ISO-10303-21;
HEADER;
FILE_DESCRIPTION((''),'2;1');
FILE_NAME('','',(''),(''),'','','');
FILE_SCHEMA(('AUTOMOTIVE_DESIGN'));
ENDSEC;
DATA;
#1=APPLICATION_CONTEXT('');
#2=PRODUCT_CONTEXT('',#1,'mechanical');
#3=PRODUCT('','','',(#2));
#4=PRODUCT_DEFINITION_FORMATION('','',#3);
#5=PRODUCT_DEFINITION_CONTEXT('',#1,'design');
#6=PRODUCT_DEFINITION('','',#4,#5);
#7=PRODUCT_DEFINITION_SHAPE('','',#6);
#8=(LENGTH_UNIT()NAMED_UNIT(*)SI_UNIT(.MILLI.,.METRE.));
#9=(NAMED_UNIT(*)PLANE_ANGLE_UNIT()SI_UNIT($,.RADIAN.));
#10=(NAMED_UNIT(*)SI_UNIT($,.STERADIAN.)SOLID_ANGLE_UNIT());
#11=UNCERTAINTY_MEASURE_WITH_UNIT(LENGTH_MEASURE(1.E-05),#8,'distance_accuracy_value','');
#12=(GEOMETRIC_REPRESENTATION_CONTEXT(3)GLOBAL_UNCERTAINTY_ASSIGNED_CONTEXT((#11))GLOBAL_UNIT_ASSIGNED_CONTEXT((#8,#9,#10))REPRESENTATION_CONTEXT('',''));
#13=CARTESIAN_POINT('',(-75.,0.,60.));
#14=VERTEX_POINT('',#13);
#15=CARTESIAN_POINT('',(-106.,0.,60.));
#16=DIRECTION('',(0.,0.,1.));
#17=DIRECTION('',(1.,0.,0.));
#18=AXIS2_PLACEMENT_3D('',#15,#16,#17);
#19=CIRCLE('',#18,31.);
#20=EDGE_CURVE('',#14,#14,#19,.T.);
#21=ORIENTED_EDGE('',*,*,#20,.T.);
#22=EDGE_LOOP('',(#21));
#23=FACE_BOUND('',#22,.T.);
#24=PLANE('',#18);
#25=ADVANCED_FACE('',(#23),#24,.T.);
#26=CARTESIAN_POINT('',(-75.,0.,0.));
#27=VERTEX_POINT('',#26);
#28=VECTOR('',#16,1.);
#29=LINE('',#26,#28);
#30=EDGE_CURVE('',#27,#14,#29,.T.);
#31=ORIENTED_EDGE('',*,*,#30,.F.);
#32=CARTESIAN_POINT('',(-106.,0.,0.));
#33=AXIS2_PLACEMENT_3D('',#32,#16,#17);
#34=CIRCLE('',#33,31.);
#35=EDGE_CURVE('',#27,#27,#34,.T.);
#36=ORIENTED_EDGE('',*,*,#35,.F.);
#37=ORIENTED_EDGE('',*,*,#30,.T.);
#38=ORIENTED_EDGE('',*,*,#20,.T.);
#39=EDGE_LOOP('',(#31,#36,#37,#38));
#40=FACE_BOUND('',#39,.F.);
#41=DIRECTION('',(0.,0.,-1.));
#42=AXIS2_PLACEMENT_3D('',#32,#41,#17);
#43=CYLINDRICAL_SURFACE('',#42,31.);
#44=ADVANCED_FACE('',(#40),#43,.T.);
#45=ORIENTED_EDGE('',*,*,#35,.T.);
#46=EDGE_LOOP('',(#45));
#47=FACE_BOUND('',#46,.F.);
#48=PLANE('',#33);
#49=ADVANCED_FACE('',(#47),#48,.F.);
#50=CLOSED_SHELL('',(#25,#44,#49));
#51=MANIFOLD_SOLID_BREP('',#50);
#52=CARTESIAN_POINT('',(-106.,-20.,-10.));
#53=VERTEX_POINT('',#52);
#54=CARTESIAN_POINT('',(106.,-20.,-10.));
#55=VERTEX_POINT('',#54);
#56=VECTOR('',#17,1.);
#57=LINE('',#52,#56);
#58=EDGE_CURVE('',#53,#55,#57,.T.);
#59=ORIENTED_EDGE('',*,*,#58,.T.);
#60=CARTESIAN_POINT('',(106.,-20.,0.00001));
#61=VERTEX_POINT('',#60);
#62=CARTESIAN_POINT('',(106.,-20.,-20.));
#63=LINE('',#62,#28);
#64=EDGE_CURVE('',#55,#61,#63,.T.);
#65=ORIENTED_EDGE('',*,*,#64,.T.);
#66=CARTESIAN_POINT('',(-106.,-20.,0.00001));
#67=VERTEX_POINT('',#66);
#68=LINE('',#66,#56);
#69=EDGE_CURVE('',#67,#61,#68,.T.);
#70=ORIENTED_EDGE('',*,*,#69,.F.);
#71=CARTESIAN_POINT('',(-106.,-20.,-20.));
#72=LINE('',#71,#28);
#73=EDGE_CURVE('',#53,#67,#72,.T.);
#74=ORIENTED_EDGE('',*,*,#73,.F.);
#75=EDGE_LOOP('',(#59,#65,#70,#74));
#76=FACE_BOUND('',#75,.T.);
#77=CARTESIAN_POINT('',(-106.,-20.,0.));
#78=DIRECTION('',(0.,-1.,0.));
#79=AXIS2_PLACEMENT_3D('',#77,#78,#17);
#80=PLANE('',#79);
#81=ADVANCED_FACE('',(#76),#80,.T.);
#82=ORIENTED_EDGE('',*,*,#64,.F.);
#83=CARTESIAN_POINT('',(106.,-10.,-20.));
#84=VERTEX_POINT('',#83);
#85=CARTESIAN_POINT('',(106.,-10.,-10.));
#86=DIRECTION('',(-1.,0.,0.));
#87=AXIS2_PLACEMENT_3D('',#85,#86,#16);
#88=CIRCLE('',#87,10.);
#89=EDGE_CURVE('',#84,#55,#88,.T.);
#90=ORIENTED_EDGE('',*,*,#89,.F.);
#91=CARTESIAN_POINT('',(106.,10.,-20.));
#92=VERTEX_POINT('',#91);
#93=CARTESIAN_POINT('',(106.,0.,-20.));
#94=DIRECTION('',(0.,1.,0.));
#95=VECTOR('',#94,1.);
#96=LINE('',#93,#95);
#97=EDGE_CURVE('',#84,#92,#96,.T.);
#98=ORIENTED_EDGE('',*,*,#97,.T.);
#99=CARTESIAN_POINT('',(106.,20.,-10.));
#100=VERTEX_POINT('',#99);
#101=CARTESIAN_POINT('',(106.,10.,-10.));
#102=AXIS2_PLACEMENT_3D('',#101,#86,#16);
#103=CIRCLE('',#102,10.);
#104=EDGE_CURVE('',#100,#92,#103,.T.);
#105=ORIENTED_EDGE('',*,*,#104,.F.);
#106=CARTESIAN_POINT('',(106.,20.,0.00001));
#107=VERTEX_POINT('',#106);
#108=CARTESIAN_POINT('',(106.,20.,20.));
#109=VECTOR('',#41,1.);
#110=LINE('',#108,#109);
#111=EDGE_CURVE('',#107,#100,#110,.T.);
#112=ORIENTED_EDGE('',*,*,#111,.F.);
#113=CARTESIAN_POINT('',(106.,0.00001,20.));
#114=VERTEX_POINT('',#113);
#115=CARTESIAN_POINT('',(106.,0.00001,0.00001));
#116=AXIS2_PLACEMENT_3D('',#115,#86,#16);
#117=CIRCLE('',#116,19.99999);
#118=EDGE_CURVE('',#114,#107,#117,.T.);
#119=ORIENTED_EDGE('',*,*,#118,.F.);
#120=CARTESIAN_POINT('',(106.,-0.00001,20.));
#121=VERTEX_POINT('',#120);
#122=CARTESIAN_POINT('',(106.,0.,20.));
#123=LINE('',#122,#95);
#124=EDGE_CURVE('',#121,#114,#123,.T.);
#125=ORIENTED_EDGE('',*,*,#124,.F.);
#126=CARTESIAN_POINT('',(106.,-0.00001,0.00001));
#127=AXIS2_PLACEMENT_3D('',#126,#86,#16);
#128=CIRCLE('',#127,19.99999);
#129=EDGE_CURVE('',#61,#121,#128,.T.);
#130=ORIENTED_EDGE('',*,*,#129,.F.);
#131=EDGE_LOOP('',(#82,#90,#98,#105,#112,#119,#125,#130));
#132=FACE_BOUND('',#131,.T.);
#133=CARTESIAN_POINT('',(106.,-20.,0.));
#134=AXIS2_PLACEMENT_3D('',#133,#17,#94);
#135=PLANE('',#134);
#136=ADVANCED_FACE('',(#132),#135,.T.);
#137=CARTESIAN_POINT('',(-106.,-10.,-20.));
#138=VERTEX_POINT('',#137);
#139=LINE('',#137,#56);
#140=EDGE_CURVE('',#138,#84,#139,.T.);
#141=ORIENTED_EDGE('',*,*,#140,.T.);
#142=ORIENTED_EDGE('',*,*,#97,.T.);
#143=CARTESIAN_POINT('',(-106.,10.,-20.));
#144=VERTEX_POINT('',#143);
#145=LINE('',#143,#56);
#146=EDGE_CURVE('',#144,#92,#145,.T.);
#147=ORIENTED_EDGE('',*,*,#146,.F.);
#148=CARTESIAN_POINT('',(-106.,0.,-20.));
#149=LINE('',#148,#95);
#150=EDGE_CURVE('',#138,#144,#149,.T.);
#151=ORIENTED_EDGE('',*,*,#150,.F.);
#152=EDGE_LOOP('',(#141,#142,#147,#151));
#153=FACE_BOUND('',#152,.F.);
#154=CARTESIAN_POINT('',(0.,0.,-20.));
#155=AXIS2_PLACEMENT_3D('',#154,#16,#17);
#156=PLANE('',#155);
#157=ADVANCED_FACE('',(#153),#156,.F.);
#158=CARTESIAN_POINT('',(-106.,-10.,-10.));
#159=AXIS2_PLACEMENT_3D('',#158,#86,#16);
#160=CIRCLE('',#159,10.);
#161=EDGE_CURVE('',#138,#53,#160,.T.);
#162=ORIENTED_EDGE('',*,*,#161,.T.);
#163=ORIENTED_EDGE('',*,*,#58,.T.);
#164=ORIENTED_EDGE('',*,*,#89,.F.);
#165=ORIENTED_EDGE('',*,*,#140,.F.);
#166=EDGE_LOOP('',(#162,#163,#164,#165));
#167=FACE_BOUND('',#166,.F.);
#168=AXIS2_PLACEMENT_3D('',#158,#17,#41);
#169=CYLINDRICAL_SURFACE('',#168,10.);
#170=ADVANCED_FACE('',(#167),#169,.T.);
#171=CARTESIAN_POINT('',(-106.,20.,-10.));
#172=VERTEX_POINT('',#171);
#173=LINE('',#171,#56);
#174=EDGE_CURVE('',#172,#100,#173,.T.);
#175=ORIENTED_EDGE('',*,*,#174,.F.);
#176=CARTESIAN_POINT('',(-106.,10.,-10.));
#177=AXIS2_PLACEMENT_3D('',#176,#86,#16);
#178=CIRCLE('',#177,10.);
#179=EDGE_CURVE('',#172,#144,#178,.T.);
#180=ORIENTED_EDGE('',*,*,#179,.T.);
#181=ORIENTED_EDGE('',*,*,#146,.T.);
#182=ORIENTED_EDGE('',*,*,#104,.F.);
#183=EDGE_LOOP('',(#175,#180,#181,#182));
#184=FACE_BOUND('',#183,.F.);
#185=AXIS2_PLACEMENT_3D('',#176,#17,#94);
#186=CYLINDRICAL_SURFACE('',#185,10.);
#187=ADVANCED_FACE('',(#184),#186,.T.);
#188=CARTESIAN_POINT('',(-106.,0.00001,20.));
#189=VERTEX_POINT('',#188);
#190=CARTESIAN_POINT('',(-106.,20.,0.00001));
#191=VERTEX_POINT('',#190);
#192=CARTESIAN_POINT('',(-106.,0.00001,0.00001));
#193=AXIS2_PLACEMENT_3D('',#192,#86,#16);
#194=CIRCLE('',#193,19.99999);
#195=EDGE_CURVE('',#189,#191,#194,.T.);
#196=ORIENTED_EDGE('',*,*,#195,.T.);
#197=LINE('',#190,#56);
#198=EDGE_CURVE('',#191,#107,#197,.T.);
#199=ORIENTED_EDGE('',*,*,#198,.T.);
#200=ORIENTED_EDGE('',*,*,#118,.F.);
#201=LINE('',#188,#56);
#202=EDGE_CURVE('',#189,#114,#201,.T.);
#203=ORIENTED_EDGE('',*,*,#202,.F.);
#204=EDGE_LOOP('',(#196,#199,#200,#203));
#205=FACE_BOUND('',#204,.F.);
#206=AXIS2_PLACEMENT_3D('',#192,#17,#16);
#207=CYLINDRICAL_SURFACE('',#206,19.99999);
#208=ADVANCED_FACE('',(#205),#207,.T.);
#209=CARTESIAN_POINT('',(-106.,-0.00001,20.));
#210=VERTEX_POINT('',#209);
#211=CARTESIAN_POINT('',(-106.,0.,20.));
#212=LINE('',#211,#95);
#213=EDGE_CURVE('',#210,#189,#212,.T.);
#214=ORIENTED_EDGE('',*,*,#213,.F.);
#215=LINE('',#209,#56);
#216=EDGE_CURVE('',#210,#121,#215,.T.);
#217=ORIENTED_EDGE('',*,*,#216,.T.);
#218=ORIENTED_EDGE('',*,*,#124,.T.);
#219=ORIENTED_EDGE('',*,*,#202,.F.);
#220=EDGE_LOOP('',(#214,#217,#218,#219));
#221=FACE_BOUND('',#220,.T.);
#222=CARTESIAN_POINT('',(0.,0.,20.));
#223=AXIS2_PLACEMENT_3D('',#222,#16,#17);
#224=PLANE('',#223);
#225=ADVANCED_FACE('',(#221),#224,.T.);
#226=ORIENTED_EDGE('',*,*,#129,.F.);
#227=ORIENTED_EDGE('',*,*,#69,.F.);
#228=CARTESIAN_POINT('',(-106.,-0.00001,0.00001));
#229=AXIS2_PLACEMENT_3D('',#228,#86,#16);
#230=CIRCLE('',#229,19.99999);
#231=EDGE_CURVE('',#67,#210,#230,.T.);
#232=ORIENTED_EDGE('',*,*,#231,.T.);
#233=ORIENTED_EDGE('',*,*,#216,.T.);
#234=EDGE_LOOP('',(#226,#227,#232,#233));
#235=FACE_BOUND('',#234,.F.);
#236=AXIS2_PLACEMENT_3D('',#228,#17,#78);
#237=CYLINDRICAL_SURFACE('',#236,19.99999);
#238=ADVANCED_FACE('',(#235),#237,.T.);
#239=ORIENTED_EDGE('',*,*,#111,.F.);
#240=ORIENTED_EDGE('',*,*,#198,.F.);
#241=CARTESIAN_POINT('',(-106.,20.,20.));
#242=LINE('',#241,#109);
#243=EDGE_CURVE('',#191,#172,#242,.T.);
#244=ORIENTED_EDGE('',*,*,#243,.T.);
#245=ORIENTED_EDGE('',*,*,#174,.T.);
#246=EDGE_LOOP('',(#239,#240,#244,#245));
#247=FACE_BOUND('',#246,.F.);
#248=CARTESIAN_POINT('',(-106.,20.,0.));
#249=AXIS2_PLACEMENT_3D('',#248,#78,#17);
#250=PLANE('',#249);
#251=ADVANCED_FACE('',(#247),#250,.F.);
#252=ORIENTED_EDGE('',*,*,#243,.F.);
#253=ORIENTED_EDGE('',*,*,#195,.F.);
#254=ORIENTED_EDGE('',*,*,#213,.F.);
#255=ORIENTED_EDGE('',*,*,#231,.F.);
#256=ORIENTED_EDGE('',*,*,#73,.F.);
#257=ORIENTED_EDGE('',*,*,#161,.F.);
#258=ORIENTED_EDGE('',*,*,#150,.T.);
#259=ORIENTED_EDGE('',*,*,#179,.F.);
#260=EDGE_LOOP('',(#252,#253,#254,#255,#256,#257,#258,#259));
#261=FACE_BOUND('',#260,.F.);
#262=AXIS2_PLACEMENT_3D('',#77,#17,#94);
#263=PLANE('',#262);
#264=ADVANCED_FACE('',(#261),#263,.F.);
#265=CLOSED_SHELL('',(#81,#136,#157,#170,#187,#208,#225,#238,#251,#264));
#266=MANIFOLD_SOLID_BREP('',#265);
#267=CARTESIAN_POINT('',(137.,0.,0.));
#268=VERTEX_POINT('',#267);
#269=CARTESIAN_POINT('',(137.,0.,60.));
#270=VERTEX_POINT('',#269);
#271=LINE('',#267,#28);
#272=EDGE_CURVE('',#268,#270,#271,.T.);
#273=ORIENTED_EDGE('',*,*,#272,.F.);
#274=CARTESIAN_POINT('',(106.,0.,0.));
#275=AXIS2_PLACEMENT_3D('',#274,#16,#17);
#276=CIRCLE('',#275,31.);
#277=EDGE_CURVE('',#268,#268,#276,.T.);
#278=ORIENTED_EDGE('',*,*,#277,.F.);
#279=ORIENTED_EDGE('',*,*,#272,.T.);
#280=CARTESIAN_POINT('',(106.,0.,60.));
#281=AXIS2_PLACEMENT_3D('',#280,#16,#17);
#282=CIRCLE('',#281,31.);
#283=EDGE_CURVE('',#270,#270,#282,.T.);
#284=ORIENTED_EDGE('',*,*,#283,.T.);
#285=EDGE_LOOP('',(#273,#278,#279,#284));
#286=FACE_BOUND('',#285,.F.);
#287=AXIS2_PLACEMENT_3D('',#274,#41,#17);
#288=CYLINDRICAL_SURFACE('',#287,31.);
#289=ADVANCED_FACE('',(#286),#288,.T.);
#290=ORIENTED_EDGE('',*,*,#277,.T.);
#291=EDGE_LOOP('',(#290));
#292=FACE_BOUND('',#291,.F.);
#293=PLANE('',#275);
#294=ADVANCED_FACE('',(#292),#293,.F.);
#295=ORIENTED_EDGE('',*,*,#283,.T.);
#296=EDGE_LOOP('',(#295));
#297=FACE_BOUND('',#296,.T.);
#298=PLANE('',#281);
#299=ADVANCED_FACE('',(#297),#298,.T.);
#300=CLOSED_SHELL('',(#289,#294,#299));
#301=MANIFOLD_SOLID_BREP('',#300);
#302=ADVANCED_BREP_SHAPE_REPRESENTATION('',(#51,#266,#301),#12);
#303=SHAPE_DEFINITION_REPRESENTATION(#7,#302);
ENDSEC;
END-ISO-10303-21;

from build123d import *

# Parameters (mm, degrees)
F0_R     = 31
F1_DEPTH = 60
F2_W     = 212
F2_H     = 40
F3_DEPTH = 20
F4_R     = 10
F5_R     = 19.99999


# Not quite as in the source:
# - a fillet or chamfer is up to 0.001 mm smaller than in the source, because OpenCascade refuses the exact size


with BuildPart() as f1:
    # F0 (on Top) → F1 (new body)
    with BuildSketch(Plane.XY):
        with Locations((-106, 0)):
            Circle(F0_R)
    extrude(amount=F1_DEPTH)


with BuildPart() as f1b:
    # F0 (on Top) → F1, piece 2 (new body)
    with BuildSketch(Plane.XY):
        with Locations((106, 0)):
            Circle(F0_R)
    extrude(amount=F1_DEPTH)


with BuildPart() as f3:
    # F2 (on Top) → F3 (new body, symmetric)
    with BuildSketch(Plane.XY):
        Rectangle(F2_W, F2_H)
    extrude(amount=F3_DEPTH, both=True)

    # F4
    f4_edges = [f3.edges().sort_by_distance(p)[0] for p in [
        (0, 20, -20),
        (0, -20, -20),
    ]]
    fillet(f4_edges, radius=F4_R)

    # F5 (radius 20 in the source; OpenCascade refuses exactly that, so slightly less here)
    f5_edges = [f3.edges().sort_by_distance(p)[0] for p in [
        (0, 20, 20),
        (0, -20, 20),
    ]]
    fillet(f5_edges, radius=F5_R)


solid = Compound([f1.part, f1b.part, f3.part])
